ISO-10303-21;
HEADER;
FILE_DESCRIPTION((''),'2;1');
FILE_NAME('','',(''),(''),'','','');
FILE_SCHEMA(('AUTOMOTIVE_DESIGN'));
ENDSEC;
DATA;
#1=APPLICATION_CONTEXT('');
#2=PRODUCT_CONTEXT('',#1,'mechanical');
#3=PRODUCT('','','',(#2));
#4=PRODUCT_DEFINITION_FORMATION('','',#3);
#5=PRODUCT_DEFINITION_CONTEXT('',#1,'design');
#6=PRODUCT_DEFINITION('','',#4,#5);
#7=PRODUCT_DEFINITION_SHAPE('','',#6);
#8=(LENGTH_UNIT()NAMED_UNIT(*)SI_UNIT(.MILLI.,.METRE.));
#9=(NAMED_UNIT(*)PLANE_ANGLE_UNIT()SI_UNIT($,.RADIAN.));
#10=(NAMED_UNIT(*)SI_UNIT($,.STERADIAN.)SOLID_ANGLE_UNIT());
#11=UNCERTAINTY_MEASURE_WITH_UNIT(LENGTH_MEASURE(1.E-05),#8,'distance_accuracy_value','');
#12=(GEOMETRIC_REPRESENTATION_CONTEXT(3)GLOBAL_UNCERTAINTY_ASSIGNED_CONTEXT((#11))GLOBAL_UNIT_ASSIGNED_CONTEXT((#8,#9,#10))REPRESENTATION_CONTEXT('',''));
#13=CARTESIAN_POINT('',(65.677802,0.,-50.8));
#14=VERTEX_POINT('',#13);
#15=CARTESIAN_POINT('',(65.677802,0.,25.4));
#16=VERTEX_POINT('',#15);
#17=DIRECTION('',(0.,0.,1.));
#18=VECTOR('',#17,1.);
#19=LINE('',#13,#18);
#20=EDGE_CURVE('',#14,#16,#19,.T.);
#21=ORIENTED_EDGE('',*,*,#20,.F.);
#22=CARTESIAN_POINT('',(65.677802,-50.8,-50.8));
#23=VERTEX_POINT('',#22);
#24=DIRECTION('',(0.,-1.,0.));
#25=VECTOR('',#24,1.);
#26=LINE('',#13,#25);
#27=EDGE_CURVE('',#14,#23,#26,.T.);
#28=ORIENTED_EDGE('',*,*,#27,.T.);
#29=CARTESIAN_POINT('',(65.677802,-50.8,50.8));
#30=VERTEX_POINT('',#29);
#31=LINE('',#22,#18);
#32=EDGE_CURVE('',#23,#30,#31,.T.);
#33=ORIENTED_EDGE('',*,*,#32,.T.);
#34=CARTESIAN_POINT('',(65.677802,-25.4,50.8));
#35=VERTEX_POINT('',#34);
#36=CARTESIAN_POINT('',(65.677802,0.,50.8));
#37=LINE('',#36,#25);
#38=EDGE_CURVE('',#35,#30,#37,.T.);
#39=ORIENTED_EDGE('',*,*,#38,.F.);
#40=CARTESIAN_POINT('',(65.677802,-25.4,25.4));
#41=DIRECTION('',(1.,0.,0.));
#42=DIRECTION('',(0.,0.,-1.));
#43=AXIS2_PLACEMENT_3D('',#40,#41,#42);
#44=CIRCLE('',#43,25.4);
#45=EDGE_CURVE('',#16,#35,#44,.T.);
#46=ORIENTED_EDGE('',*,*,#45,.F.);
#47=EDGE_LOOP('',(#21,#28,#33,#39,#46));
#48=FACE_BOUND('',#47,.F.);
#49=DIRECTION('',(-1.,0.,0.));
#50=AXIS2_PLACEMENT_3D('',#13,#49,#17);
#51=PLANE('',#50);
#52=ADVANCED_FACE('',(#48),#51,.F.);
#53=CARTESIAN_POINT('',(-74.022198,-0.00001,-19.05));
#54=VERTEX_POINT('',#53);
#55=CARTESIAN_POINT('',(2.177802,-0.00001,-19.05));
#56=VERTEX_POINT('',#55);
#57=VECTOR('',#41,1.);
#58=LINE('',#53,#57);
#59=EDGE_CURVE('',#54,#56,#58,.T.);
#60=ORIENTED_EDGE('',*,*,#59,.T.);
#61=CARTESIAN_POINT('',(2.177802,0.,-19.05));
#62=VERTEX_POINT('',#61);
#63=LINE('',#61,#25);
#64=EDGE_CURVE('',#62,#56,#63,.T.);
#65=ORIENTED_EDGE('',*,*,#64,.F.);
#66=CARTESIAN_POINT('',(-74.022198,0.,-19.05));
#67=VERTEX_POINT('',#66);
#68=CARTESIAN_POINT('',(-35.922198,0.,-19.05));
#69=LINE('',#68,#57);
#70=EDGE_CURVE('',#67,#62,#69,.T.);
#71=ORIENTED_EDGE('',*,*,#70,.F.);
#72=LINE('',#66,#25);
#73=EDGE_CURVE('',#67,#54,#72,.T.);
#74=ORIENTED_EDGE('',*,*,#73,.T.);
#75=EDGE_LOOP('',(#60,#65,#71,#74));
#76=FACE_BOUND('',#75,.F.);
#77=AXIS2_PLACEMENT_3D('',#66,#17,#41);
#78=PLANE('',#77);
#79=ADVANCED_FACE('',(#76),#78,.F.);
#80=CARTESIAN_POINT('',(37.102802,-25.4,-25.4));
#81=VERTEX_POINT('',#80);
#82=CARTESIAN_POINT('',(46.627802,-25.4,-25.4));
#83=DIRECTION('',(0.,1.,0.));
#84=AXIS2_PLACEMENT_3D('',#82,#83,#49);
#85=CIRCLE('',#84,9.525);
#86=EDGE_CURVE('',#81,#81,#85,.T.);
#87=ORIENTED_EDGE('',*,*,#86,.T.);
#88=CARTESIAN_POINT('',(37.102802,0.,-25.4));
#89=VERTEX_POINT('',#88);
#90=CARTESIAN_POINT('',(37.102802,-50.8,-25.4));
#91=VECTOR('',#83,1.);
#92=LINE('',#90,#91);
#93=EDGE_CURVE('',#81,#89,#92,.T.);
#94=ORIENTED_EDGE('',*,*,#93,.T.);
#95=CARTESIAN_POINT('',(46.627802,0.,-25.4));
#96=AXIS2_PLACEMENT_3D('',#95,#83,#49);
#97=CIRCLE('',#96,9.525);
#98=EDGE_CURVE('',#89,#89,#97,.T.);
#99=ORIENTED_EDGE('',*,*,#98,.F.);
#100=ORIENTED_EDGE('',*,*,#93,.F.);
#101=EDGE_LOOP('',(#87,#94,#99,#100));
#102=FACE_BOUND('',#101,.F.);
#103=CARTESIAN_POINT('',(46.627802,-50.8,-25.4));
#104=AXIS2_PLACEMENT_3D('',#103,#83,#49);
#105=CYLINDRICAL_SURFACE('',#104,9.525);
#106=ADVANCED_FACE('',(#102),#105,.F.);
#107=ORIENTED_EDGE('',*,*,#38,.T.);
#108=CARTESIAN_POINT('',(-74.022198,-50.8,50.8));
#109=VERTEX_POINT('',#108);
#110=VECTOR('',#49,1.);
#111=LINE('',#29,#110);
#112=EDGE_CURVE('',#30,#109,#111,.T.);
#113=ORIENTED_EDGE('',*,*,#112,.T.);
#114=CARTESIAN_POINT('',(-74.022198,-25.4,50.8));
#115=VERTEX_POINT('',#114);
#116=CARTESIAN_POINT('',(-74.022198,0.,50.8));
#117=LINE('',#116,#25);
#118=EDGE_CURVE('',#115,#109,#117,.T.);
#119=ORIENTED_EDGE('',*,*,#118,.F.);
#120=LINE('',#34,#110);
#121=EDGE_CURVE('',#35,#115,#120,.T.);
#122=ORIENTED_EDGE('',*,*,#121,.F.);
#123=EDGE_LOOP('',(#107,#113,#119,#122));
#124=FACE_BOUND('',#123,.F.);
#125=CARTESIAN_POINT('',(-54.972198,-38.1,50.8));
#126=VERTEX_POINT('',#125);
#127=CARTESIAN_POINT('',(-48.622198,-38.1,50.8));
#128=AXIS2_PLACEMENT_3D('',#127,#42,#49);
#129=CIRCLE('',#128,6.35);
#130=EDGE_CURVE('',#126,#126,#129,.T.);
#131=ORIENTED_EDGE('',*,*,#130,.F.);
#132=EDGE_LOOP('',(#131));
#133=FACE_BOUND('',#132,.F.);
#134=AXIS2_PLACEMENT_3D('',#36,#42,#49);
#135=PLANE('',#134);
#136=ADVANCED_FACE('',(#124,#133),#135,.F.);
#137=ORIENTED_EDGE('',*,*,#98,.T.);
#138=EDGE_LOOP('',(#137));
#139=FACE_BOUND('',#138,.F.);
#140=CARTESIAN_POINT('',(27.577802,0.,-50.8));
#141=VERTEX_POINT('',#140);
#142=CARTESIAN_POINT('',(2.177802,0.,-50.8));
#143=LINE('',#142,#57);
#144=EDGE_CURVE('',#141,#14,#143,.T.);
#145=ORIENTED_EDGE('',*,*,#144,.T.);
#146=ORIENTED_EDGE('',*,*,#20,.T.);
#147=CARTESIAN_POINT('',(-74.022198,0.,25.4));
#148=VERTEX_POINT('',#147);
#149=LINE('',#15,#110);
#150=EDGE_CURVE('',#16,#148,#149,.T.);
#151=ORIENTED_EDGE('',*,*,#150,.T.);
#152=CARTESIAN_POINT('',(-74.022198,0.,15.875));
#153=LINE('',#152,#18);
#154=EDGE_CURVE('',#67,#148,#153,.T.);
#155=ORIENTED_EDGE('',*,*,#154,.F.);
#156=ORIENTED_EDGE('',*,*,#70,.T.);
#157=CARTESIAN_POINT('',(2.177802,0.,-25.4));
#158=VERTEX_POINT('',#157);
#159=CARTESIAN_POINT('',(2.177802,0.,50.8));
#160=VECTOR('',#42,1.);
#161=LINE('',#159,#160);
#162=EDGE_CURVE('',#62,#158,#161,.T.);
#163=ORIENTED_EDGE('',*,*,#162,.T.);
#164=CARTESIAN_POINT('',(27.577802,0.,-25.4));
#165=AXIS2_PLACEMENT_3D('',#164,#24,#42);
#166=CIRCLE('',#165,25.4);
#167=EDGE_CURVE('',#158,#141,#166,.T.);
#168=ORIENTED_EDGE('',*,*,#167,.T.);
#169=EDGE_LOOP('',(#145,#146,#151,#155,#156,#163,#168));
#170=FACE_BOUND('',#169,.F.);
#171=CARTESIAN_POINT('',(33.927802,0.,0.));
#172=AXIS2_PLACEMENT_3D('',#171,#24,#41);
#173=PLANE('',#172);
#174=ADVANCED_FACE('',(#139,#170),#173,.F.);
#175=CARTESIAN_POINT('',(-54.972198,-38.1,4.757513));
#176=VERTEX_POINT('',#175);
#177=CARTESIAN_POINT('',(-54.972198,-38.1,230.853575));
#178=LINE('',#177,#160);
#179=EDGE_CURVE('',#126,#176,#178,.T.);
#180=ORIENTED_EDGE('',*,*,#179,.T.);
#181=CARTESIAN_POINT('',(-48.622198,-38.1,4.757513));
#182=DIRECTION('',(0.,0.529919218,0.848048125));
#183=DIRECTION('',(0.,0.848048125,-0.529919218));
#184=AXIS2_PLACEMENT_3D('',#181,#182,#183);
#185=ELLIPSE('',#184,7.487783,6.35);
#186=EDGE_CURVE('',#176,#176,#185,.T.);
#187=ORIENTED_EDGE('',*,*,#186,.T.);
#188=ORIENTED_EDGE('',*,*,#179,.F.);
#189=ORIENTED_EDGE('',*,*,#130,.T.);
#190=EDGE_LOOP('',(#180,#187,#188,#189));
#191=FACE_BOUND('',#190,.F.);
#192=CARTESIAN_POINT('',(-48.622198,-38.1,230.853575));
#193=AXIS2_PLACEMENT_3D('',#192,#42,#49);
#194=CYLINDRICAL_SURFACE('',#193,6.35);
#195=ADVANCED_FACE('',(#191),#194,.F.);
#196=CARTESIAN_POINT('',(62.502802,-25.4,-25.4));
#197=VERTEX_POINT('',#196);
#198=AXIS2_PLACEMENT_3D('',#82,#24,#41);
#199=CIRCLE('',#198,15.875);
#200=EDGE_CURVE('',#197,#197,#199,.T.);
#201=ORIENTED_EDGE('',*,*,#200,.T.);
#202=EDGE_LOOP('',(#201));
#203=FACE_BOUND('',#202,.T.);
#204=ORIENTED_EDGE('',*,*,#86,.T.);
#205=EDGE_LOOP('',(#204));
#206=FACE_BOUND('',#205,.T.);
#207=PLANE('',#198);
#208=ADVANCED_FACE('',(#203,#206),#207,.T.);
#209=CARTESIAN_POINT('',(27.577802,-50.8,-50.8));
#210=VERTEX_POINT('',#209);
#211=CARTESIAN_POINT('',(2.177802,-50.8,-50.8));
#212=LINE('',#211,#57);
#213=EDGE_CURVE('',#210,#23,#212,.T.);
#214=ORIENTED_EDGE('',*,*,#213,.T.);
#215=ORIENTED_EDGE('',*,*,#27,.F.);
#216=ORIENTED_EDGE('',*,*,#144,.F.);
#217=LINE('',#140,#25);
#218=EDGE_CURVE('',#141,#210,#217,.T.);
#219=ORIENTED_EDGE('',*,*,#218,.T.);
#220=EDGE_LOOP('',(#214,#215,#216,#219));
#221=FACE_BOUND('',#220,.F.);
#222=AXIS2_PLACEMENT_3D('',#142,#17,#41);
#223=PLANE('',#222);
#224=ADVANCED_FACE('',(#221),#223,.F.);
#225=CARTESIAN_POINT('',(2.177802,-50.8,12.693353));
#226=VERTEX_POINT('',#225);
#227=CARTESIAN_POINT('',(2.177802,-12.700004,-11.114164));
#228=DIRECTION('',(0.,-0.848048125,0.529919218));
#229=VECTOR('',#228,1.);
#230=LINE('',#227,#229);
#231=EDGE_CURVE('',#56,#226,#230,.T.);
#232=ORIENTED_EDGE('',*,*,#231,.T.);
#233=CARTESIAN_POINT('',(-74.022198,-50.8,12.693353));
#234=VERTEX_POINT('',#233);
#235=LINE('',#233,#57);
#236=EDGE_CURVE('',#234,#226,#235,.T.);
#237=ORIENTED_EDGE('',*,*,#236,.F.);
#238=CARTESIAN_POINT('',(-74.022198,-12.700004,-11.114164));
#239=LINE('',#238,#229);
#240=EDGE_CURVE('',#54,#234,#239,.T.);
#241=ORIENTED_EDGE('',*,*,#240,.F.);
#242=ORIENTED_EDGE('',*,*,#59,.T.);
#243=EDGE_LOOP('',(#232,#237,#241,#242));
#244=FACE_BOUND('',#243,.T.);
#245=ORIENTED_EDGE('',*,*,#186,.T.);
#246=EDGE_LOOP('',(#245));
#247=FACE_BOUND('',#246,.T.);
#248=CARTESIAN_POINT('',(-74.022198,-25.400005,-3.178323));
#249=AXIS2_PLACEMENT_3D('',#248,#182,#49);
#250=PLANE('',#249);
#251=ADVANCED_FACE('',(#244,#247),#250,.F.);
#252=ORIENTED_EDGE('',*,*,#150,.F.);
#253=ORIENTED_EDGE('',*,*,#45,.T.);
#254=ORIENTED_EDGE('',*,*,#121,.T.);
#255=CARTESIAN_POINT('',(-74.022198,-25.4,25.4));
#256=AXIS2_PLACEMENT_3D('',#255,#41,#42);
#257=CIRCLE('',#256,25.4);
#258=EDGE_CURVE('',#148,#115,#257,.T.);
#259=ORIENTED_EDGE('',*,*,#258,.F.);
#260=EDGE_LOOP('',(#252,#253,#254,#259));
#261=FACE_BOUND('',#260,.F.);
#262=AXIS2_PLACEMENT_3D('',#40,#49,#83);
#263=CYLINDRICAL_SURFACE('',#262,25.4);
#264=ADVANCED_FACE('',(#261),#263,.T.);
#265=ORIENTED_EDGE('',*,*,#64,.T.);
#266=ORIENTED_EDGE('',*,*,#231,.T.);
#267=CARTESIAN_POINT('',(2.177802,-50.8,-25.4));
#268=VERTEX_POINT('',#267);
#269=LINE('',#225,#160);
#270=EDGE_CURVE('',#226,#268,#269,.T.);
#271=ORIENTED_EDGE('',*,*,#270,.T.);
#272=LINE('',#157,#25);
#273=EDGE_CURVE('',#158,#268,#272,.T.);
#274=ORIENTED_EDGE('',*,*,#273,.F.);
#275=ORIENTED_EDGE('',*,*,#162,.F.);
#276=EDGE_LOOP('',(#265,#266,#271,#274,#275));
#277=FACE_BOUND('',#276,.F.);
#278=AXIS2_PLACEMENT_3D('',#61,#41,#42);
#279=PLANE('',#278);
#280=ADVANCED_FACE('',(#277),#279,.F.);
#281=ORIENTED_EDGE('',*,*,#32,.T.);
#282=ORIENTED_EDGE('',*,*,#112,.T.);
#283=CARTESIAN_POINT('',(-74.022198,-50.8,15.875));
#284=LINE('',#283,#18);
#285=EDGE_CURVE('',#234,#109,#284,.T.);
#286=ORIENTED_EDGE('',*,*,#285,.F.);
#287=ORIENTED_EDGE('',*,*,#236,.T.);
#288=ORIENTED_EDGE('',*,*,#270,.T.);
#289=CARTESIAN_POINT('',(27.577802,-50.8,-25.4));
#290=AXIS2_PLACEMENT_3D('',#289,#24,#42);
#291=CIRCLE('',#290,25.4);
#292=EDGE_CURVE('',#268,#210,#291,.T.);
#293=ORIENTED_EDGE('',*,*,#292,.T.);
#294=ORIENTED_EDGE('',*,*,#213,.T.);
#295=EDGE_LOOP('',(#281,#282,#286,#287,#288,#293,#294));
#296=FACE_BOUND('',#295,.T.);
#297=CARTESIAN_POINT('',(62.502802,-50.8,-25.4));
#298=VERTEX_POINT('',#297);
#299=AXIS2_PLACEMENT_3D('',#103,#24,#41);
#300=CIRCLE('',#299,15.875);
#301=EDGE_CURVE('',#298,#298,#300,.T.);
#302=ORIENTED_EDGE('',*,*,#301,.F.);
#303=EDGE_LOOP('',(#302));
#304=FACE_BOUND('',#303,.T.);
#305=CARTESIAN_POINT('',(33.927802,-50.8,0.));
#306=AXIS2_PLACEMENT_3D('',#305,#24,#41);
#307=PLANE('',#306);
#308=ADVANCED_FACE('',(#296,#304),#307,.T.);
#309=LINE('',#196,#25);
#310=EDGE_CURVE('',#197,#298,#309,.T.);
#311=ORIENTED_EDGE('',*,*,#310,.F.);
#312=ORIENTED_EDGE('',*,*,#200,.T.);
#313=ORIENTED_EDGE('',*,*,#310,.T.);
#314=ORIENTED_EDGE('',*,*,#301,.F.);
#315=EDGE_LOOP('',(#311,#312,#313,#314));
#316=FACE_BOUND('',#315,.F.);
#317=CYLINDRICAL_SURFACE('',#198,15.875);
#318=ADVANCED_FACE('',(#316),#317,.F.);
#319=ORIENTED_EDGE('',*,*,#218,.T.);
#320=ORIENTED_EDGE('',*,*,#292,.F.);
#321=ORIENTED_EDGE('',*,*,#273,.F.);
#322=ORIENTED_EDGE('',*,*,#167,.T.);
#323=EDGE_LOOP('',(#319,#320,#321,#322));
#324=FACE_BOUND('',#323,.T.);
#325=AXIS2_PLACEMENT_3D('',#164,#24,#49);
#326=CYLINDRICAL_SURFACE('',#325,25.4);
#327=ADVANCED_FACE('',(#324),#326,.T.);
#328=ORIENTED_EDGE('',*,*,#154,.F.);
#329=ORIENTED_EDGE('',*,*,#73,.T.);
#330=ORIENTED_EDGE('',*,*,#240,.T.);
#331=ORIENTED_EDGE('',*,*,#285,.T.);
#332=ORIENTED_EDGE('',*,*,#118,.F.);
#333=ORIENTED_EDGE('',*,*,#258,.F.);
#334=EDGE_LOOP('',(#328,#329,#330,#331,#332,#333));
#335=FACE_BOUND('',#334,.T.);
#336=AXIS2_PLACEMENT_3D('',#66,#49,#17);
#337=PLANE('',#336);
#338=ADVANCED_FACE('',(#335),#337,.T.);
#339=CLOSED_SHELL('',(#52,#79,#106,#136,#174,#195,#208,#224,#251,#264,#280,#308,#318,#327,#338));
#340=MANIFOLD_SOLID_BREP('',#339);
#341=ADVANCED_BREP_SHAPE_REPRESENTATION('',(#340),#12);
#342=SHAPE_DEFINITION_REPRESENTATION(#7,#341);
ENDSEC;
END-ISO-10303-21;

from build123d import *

# Parameters (mm, degrees)
F0_R           = 15.875
F0_W           = 76.2
F0_H           = 69.85
F1_DEPTH       = 50.8
F2_R           = 25.4
F3_R           = 25.4
F5_SIZE2       = 31.743353
F5_SIZE        = 50.79999
F7_D           = 12.7
F8_D           = 19.05
F8_CBORE_D     = 31.75
F8_CBORE_DEPTH = 25.4


# Not quite as in the source:
# - a fillet or chamfer is up to 0.001 mm smaller than in the source, because OpenCascade refuses the exact size


with BuildPart() as f1:
    # F0 (on Front) → F1 (new body)
    with BuildSketch(Plane.XZ):
        Polygon((65.6778021347, 50.8), (2.1778021347, 50.8), (2.1778021347, -19.05), (2.1778021347, -50.8), (65.6778021347, -50.8), align=None)
        with Locations((46.6278021347, -25.4)):
            Circle(F0_R, mode=Mode.SUBTRACT)
        with Locations((46.6278021347, -25.4)):
            Circle(F0_R)
        with Locations((-35.9221978653, 15.875)):
            Rectangle(F0_W, F0_H)
    extrude(amount=F1_DEPTH)

    # F2
    f2_edges = [f1.edges().sort_by_distance(p)[0] for p in [
        (2.177802, -25.4, -50.8),
    ]]
    fillet(f2_edges, radius=F2_R)

    # F3
    f3_edges = [f1.edges().sort_by_distance(p)[0] for p in [
        (-4.172198, 0, 50.8),
    ]]
    fillet(f3_edges, radius=F3_R)

    # F5 (size 50.8 and 31.743363077 in the source; OpenCascade refuses exactly that, so slightly less here)
    f5_edges = [f1.edges().sort_by_distance(p)[0] for p in [
        (-35.922198, -50.8, -19.05),
    ]]
    f5_side = f1.faces().sort_by_distance((-35.922198, -25.4, -19.05))[0]
    chamfer(f5_edges, length=F5_SIZE, length2=F5_SIZE2, reference=f5_side)

    # F7 (through all)
    with Locations(Plane.XY.offset(50.8)):
        with Locations((-48.6221978653, -38.1)):
            Hole(F7_D / 2)

    # F8 (through all)
    with Locations(Plane.XZ.offset(50.8)):
        with Locations((46.6278021347, -25.4)):
            CounterBoreHole(F8_D / 2, F8_CBORE_D / 2, F8_CBORE_DEPTH)


solid = f1.part
